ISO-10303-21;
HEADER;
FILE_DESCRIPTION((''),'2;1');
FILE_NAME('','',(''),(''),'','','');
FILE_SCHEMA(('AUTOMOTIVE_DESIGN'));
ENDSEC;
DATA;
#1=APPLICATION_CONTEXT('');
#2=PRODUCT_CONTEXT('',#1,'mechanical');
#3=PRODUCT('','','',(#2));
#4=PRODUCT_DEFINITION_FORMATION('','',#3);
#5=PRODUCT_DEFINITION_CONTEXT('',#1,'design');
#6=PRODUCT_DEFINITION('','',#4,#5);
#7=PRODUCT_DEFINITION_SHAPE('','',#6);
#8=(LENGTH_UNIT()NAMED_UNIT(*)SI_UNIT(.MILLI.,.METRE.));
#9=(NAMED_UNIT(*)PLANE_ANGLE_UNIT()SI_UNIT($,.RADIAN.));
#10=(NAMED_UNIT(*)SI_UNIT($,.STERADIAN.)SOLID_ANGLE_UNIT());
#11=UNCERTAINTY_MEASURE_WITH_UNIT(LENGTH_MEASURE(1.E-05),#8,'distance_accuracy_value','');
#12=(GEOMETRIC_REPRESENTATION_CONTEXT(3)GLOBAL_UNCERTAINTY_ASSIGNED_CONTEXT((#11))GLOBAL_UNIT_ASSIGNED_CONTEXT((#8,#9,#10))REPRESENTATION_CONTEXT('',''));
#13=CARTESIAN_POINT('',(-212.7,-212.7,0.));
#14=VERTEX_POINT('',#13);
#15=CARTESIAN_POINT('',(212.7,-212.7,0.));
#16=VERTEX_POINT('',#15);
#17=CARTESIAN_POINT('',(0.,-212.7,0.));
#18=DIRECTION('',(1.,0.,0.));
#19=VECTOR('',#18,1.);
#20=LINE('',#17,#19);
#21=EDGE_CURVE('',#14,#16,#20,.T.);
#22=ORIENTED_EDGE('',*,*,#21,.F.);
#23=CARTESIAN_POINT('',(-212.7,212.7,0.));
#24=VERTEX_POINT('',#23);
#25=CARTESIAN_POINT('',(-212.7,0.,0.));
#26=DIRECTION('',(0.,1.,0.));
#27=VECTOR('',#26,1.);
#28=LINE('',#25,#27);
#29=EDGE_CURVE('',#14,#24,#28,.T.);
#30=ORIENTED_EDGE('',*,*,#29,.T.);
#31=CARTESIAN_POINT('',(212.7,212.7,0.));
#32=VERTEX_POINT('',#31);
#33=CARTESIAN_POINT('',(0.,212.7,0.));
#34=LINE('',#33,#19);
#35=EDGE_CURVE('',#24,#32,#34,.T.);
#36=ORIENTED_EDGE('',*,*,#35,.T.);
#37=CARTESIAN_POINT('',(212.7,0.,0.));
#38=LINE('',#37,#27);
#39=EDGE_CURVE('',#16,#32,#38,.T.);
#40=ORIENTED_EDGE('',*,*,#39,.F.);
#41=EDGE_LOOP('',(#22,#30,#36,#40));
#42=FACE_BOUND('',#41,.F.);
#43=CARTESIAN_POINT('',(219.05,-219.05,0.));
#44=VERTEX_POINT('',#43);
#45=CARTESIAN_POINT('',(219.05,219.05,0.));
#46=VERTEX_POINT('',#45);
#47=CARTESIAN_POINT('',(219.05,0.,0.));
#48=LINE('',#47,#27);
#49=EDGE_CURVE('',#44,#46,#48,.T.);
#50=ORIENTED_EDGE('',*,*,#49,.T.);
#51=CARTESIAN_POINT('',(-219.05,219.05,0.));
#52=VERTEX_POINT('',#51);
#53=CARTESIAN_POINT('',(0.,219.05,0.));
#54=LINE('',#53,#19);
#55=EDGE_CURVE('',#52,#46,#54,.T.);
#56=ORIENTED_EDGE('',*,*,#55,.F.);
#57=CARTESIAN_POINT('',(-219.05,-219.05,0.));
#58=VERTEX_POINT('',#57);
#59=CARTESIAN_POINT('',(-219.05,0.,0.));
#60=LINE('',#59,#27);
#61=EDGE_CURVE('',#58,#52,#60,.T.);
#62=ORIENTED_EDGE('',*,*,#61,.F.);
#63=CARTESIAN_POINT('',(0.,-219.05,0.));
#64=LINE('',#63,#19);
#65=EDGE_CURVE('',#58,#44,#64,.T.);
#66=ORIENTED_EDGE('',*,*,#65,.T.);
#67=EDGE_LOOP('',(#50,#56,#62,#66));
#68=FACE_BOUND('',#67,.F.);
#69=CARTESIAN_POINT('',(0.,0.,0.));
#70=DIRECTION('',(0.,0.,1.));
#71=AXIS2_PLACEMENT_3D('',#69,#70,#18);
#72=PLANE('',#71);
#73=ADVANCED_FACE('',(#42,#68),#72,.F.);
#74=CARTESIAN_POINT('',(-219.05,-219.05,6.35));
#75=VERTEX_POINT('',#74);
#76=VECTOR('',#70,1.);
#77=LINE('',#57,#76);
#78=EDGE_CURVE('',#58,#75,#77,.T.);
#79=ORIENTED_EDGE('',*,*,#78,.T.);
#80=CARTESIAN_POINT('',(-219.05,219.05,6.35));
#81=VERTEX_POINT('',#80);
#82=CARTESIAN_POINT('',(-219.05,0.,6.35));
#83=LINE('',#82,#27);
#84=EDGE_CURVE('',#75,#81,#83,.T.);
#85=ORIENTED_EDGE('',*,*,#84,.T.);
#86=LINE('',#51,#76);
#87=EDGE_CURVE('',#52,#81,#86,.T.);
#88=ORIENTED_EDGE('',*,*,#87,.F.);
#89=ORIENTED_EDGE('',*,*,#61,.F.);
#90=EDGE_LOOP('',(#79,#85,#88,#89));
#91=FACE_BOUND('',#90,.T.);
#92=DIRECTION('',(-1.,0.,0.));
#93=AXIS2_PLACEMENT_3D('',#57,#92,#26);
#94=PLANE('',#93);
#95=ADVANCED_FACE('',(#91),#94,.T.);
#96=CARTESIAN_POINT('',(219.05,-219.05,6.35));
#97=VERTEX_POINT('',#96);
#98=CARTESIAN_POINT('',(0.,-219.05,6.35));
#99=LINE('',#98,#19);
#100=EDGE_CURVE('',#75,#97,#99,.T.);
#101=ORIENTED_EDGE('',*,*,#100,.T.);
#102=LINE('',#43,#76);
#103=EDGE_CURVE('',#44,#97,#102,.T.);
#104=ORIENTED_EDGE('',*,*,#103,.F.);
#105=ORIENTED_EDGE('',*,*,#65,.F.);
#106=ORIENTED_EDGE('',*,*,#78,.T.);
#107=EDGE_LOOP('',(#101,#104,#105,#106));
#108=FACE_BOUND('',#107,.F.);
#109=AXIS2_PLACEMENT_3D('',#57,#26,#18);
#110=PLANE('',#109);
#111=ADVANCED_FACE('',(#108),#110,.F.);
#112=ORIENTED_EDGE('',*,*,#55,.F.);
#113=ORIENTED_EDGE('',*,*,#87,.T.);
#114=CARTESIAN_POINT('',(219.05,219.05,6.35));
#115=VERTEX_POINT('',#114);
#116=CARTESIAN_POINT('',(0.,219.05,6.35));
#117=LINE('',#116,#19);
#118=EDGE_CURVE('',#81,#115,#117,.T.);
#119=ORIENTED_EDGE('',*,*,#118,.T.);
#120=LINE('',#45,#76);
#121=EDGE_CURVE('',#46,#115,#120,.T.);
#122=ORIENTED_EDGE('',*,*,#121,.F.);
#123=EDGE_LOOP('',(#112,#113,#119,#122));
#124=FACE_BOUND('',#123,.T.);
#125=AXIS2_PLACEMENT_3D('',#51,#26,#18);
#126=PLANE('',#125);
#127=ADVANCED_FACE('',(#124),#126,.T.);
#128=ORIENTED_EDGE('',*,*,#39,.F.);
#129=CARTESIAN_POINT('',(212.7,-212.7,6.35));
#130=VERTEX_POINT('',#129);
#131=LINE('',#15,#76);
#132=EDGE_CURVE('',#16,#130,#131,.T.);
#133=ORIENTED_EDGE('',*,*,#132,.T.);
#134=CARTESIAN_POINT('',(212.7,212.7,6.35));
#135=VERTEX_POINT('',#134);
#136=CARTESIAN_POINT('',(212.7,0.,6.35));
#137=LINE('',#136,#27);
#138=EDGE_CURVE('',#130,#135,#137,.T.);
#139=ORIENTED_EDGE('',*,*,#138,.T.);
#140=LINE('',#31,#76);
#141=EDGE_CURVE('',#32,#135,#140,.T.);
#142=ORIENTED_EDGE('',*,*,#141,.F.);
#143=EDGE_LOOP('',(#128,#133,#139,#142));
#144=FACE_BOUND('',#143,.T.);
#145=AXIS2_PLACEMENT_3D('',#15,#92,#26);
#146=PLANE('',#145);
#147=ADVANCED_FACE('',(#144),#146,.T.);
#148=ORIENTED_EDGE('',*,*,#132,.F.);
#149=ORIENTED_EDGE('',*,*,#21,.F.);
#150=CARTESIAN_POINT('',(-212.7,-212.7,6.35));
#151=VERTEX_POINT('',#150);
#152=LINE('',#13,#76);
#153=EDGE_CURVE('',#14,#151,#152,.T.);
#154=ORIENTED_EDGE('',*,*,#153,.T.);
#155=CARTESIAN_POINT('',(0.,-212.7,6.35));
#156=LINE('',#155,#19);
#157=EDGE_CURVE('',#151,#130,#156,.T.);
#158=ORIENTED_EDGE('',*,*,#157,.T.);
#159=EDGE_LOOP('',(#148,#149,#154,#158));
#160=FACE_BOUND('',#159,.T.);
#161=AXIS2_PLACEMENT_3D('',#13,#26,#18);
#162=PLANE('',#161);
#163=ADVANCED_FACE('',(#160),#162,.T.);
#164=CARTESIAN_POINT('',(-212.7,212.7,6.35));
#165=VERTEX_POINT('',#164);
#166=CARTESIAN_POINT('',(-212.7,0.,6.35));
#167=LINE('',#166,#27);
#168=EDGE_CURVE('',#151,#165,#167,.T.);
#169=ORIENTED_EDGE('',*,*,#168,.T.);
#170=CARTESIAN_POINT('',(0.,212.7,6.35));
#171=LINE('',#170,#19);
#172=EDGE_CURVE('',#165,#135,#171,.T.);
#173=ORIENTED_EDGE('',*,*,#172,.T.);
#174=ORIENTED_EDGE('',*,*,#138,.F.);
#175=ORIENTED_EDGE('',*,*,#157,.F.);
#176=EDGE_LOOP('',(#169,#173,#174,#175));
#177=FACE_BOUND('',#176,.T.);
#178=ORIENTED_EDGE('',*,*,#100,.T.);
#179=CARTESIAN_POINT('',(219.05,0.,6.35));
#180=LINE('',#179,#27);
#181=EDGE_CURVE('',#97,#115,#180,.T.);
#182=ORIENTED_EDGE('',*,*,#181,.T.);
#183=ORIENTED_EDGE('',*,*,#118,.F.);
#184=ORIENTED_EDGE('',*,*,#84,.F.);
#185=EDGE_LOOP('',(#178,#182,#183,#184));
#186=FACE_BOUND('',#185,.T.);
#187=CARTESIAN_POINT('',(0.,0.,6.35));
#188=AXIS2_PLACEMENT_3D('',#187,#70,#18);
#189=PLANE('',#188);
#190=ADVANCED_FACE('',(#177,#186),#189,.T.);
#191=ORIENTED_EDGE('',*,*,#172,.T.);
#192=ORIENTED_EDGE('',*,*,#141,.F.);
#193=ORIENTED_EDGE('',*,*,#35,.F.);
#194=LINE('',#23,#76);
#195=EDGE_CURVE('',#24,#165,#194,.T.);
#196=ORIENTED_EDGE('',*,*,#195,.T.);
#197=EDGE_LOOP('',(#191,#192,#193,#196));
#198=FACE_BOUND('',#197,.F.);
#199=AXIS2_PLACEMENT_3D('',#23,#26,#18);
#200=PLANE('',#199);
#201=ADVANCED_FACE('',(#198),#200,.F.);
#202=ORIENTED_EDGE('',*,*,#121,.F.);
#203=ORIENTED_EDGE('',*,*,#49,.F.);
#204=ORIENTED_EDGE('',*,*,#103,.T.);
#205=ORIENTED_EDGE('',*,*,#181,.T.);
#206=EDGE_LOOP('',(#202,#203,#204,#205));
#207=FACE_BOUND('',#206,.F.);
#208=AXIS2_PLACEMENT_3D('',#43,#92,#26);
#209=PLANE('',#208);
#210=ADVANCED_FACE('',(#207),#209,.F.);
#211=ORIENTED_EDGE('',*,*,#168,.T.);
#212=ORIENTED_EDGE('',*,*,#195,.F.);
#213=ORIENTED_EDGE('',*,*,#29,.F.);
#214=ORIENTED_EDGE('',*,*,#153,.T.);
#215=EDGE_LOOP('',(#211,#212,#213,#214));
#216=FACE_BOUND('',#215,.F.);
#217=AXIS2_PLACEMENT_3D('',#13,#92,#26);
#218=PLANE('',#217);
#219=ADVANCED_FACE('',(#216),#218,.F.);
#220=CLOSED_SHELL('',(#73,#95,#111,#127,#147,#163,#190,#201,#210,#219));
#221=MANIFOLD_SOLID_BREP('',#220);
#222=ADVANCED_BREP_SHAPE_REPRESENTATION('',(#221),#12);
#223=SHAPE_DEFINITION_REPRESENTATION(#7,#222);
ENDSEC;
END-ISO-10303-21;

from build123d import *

# Parameters (mm, degrees)
F0_W     = 438.1
F0_H     = 438.1
F0_W_2   = 425.4
F0_H_2   = 425.4
F1_DEPTH = 6.35


# Not quite as in the source:
# - a length typed as a fraction of an inch, garbled in the dataset ("3 / 203.2 mm" for 3/8 in), is restored


with BuildPart() as f1:
    # F0 (on Top) → F1 (new body)
    with BuildSketch(Plane.XY):
        Rectangle(F0_W, F0_H)
        Rectangle(F0_W_2, F0_H_2, mode=Mode.SUBTRACT)
    extrude(amount=F1_DEPTH)


solid = f1.part
